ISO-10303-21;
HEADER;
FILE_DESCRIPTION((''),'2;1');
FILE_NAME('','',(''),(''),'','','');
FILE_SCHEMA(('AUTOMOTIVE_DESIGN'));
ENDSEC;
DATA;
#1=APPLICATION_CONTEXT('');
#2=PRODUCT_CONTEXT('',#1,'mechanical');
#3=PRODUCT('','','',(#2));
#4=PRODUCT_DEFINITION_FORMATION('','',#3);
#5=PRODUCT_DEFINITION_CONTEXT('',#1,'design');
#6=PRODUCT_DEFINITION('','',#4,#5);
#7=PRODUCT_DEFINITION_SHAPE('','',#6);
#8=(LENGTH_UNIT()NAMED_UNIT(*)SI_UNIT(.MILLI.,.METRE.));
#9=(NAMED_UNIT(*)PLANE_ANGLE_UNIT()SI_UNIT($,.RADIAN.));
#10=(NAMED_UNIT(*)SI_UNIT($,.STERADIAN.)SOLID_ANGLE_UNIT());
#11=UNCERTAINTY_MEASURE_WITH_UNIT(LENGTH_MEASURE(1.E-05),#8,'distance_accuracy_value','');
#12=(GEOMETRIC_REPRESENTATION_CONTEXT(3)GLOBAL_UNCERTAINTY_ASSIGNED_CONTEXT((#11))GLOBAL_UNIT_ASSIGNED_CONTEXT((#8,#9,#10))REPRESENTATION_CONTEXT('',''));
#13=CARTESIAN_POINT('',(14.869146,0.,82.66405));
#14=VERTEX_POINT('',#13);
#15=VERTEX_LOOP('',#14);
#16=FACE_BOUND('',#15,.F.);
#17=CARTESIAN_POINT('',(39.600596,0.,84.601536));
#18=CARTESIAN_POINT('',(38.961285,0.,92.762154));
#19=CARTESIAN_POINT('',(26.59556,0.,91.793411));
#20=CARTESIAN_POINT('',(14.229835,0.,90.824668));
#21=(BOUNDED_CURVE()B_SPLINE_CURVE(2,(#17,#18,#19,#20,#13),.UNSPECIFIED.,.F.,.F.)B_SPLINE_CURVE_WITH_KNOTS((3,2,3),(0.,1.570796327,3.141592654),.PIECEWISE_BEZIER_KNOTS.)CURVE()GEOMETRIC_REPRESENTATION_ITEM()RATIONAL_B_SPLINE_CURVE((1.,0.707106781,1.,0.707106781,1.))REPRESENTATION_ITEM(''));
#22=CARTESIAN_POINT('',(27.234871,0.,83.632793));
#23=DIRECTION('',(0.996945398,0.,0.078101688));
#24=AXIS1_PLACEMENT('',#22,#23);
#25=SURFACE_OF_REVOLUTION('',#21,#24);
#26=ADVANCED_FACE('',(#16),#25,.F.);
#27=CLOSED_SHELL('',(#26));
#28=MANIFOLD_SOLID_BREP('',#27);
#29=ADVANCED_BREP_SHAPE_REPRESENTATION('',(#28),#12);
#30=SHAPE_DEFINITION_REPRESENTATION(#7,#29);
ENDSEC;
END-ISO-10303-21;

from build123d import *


with BuildPart() as f1:
    # F0 (on Front) → F1 (revolve)
    with BuildSketch(Plane.XZ):
        with BuildLine():
            add(Edge.make_bspline(
                [(39.6005958319, 84.6015363932), (38.9612849501, 92.76215437), (26.5955600586, 91.7934112543), (14.2298351672, 90.8246681387), (14.869146049, 82.6640501618)],
                knots=[0, 0, 0, 1.5707963268, 1.5707963268, 3.1415926536, 3.1415926536, 3.1415926536], degree=2, weights=[1, 0.7071067812, 1, 0.7071067812, 1]))
            Line((14.869146049, 82.6640501618), (39.6005958319, 84.6015363932))
        make_face()
    revolve(axis=Axis((27.2348709404, 0, 83.6327932775), (0.9969453978, 0, 0.0781016883)))


solid = f1.part
